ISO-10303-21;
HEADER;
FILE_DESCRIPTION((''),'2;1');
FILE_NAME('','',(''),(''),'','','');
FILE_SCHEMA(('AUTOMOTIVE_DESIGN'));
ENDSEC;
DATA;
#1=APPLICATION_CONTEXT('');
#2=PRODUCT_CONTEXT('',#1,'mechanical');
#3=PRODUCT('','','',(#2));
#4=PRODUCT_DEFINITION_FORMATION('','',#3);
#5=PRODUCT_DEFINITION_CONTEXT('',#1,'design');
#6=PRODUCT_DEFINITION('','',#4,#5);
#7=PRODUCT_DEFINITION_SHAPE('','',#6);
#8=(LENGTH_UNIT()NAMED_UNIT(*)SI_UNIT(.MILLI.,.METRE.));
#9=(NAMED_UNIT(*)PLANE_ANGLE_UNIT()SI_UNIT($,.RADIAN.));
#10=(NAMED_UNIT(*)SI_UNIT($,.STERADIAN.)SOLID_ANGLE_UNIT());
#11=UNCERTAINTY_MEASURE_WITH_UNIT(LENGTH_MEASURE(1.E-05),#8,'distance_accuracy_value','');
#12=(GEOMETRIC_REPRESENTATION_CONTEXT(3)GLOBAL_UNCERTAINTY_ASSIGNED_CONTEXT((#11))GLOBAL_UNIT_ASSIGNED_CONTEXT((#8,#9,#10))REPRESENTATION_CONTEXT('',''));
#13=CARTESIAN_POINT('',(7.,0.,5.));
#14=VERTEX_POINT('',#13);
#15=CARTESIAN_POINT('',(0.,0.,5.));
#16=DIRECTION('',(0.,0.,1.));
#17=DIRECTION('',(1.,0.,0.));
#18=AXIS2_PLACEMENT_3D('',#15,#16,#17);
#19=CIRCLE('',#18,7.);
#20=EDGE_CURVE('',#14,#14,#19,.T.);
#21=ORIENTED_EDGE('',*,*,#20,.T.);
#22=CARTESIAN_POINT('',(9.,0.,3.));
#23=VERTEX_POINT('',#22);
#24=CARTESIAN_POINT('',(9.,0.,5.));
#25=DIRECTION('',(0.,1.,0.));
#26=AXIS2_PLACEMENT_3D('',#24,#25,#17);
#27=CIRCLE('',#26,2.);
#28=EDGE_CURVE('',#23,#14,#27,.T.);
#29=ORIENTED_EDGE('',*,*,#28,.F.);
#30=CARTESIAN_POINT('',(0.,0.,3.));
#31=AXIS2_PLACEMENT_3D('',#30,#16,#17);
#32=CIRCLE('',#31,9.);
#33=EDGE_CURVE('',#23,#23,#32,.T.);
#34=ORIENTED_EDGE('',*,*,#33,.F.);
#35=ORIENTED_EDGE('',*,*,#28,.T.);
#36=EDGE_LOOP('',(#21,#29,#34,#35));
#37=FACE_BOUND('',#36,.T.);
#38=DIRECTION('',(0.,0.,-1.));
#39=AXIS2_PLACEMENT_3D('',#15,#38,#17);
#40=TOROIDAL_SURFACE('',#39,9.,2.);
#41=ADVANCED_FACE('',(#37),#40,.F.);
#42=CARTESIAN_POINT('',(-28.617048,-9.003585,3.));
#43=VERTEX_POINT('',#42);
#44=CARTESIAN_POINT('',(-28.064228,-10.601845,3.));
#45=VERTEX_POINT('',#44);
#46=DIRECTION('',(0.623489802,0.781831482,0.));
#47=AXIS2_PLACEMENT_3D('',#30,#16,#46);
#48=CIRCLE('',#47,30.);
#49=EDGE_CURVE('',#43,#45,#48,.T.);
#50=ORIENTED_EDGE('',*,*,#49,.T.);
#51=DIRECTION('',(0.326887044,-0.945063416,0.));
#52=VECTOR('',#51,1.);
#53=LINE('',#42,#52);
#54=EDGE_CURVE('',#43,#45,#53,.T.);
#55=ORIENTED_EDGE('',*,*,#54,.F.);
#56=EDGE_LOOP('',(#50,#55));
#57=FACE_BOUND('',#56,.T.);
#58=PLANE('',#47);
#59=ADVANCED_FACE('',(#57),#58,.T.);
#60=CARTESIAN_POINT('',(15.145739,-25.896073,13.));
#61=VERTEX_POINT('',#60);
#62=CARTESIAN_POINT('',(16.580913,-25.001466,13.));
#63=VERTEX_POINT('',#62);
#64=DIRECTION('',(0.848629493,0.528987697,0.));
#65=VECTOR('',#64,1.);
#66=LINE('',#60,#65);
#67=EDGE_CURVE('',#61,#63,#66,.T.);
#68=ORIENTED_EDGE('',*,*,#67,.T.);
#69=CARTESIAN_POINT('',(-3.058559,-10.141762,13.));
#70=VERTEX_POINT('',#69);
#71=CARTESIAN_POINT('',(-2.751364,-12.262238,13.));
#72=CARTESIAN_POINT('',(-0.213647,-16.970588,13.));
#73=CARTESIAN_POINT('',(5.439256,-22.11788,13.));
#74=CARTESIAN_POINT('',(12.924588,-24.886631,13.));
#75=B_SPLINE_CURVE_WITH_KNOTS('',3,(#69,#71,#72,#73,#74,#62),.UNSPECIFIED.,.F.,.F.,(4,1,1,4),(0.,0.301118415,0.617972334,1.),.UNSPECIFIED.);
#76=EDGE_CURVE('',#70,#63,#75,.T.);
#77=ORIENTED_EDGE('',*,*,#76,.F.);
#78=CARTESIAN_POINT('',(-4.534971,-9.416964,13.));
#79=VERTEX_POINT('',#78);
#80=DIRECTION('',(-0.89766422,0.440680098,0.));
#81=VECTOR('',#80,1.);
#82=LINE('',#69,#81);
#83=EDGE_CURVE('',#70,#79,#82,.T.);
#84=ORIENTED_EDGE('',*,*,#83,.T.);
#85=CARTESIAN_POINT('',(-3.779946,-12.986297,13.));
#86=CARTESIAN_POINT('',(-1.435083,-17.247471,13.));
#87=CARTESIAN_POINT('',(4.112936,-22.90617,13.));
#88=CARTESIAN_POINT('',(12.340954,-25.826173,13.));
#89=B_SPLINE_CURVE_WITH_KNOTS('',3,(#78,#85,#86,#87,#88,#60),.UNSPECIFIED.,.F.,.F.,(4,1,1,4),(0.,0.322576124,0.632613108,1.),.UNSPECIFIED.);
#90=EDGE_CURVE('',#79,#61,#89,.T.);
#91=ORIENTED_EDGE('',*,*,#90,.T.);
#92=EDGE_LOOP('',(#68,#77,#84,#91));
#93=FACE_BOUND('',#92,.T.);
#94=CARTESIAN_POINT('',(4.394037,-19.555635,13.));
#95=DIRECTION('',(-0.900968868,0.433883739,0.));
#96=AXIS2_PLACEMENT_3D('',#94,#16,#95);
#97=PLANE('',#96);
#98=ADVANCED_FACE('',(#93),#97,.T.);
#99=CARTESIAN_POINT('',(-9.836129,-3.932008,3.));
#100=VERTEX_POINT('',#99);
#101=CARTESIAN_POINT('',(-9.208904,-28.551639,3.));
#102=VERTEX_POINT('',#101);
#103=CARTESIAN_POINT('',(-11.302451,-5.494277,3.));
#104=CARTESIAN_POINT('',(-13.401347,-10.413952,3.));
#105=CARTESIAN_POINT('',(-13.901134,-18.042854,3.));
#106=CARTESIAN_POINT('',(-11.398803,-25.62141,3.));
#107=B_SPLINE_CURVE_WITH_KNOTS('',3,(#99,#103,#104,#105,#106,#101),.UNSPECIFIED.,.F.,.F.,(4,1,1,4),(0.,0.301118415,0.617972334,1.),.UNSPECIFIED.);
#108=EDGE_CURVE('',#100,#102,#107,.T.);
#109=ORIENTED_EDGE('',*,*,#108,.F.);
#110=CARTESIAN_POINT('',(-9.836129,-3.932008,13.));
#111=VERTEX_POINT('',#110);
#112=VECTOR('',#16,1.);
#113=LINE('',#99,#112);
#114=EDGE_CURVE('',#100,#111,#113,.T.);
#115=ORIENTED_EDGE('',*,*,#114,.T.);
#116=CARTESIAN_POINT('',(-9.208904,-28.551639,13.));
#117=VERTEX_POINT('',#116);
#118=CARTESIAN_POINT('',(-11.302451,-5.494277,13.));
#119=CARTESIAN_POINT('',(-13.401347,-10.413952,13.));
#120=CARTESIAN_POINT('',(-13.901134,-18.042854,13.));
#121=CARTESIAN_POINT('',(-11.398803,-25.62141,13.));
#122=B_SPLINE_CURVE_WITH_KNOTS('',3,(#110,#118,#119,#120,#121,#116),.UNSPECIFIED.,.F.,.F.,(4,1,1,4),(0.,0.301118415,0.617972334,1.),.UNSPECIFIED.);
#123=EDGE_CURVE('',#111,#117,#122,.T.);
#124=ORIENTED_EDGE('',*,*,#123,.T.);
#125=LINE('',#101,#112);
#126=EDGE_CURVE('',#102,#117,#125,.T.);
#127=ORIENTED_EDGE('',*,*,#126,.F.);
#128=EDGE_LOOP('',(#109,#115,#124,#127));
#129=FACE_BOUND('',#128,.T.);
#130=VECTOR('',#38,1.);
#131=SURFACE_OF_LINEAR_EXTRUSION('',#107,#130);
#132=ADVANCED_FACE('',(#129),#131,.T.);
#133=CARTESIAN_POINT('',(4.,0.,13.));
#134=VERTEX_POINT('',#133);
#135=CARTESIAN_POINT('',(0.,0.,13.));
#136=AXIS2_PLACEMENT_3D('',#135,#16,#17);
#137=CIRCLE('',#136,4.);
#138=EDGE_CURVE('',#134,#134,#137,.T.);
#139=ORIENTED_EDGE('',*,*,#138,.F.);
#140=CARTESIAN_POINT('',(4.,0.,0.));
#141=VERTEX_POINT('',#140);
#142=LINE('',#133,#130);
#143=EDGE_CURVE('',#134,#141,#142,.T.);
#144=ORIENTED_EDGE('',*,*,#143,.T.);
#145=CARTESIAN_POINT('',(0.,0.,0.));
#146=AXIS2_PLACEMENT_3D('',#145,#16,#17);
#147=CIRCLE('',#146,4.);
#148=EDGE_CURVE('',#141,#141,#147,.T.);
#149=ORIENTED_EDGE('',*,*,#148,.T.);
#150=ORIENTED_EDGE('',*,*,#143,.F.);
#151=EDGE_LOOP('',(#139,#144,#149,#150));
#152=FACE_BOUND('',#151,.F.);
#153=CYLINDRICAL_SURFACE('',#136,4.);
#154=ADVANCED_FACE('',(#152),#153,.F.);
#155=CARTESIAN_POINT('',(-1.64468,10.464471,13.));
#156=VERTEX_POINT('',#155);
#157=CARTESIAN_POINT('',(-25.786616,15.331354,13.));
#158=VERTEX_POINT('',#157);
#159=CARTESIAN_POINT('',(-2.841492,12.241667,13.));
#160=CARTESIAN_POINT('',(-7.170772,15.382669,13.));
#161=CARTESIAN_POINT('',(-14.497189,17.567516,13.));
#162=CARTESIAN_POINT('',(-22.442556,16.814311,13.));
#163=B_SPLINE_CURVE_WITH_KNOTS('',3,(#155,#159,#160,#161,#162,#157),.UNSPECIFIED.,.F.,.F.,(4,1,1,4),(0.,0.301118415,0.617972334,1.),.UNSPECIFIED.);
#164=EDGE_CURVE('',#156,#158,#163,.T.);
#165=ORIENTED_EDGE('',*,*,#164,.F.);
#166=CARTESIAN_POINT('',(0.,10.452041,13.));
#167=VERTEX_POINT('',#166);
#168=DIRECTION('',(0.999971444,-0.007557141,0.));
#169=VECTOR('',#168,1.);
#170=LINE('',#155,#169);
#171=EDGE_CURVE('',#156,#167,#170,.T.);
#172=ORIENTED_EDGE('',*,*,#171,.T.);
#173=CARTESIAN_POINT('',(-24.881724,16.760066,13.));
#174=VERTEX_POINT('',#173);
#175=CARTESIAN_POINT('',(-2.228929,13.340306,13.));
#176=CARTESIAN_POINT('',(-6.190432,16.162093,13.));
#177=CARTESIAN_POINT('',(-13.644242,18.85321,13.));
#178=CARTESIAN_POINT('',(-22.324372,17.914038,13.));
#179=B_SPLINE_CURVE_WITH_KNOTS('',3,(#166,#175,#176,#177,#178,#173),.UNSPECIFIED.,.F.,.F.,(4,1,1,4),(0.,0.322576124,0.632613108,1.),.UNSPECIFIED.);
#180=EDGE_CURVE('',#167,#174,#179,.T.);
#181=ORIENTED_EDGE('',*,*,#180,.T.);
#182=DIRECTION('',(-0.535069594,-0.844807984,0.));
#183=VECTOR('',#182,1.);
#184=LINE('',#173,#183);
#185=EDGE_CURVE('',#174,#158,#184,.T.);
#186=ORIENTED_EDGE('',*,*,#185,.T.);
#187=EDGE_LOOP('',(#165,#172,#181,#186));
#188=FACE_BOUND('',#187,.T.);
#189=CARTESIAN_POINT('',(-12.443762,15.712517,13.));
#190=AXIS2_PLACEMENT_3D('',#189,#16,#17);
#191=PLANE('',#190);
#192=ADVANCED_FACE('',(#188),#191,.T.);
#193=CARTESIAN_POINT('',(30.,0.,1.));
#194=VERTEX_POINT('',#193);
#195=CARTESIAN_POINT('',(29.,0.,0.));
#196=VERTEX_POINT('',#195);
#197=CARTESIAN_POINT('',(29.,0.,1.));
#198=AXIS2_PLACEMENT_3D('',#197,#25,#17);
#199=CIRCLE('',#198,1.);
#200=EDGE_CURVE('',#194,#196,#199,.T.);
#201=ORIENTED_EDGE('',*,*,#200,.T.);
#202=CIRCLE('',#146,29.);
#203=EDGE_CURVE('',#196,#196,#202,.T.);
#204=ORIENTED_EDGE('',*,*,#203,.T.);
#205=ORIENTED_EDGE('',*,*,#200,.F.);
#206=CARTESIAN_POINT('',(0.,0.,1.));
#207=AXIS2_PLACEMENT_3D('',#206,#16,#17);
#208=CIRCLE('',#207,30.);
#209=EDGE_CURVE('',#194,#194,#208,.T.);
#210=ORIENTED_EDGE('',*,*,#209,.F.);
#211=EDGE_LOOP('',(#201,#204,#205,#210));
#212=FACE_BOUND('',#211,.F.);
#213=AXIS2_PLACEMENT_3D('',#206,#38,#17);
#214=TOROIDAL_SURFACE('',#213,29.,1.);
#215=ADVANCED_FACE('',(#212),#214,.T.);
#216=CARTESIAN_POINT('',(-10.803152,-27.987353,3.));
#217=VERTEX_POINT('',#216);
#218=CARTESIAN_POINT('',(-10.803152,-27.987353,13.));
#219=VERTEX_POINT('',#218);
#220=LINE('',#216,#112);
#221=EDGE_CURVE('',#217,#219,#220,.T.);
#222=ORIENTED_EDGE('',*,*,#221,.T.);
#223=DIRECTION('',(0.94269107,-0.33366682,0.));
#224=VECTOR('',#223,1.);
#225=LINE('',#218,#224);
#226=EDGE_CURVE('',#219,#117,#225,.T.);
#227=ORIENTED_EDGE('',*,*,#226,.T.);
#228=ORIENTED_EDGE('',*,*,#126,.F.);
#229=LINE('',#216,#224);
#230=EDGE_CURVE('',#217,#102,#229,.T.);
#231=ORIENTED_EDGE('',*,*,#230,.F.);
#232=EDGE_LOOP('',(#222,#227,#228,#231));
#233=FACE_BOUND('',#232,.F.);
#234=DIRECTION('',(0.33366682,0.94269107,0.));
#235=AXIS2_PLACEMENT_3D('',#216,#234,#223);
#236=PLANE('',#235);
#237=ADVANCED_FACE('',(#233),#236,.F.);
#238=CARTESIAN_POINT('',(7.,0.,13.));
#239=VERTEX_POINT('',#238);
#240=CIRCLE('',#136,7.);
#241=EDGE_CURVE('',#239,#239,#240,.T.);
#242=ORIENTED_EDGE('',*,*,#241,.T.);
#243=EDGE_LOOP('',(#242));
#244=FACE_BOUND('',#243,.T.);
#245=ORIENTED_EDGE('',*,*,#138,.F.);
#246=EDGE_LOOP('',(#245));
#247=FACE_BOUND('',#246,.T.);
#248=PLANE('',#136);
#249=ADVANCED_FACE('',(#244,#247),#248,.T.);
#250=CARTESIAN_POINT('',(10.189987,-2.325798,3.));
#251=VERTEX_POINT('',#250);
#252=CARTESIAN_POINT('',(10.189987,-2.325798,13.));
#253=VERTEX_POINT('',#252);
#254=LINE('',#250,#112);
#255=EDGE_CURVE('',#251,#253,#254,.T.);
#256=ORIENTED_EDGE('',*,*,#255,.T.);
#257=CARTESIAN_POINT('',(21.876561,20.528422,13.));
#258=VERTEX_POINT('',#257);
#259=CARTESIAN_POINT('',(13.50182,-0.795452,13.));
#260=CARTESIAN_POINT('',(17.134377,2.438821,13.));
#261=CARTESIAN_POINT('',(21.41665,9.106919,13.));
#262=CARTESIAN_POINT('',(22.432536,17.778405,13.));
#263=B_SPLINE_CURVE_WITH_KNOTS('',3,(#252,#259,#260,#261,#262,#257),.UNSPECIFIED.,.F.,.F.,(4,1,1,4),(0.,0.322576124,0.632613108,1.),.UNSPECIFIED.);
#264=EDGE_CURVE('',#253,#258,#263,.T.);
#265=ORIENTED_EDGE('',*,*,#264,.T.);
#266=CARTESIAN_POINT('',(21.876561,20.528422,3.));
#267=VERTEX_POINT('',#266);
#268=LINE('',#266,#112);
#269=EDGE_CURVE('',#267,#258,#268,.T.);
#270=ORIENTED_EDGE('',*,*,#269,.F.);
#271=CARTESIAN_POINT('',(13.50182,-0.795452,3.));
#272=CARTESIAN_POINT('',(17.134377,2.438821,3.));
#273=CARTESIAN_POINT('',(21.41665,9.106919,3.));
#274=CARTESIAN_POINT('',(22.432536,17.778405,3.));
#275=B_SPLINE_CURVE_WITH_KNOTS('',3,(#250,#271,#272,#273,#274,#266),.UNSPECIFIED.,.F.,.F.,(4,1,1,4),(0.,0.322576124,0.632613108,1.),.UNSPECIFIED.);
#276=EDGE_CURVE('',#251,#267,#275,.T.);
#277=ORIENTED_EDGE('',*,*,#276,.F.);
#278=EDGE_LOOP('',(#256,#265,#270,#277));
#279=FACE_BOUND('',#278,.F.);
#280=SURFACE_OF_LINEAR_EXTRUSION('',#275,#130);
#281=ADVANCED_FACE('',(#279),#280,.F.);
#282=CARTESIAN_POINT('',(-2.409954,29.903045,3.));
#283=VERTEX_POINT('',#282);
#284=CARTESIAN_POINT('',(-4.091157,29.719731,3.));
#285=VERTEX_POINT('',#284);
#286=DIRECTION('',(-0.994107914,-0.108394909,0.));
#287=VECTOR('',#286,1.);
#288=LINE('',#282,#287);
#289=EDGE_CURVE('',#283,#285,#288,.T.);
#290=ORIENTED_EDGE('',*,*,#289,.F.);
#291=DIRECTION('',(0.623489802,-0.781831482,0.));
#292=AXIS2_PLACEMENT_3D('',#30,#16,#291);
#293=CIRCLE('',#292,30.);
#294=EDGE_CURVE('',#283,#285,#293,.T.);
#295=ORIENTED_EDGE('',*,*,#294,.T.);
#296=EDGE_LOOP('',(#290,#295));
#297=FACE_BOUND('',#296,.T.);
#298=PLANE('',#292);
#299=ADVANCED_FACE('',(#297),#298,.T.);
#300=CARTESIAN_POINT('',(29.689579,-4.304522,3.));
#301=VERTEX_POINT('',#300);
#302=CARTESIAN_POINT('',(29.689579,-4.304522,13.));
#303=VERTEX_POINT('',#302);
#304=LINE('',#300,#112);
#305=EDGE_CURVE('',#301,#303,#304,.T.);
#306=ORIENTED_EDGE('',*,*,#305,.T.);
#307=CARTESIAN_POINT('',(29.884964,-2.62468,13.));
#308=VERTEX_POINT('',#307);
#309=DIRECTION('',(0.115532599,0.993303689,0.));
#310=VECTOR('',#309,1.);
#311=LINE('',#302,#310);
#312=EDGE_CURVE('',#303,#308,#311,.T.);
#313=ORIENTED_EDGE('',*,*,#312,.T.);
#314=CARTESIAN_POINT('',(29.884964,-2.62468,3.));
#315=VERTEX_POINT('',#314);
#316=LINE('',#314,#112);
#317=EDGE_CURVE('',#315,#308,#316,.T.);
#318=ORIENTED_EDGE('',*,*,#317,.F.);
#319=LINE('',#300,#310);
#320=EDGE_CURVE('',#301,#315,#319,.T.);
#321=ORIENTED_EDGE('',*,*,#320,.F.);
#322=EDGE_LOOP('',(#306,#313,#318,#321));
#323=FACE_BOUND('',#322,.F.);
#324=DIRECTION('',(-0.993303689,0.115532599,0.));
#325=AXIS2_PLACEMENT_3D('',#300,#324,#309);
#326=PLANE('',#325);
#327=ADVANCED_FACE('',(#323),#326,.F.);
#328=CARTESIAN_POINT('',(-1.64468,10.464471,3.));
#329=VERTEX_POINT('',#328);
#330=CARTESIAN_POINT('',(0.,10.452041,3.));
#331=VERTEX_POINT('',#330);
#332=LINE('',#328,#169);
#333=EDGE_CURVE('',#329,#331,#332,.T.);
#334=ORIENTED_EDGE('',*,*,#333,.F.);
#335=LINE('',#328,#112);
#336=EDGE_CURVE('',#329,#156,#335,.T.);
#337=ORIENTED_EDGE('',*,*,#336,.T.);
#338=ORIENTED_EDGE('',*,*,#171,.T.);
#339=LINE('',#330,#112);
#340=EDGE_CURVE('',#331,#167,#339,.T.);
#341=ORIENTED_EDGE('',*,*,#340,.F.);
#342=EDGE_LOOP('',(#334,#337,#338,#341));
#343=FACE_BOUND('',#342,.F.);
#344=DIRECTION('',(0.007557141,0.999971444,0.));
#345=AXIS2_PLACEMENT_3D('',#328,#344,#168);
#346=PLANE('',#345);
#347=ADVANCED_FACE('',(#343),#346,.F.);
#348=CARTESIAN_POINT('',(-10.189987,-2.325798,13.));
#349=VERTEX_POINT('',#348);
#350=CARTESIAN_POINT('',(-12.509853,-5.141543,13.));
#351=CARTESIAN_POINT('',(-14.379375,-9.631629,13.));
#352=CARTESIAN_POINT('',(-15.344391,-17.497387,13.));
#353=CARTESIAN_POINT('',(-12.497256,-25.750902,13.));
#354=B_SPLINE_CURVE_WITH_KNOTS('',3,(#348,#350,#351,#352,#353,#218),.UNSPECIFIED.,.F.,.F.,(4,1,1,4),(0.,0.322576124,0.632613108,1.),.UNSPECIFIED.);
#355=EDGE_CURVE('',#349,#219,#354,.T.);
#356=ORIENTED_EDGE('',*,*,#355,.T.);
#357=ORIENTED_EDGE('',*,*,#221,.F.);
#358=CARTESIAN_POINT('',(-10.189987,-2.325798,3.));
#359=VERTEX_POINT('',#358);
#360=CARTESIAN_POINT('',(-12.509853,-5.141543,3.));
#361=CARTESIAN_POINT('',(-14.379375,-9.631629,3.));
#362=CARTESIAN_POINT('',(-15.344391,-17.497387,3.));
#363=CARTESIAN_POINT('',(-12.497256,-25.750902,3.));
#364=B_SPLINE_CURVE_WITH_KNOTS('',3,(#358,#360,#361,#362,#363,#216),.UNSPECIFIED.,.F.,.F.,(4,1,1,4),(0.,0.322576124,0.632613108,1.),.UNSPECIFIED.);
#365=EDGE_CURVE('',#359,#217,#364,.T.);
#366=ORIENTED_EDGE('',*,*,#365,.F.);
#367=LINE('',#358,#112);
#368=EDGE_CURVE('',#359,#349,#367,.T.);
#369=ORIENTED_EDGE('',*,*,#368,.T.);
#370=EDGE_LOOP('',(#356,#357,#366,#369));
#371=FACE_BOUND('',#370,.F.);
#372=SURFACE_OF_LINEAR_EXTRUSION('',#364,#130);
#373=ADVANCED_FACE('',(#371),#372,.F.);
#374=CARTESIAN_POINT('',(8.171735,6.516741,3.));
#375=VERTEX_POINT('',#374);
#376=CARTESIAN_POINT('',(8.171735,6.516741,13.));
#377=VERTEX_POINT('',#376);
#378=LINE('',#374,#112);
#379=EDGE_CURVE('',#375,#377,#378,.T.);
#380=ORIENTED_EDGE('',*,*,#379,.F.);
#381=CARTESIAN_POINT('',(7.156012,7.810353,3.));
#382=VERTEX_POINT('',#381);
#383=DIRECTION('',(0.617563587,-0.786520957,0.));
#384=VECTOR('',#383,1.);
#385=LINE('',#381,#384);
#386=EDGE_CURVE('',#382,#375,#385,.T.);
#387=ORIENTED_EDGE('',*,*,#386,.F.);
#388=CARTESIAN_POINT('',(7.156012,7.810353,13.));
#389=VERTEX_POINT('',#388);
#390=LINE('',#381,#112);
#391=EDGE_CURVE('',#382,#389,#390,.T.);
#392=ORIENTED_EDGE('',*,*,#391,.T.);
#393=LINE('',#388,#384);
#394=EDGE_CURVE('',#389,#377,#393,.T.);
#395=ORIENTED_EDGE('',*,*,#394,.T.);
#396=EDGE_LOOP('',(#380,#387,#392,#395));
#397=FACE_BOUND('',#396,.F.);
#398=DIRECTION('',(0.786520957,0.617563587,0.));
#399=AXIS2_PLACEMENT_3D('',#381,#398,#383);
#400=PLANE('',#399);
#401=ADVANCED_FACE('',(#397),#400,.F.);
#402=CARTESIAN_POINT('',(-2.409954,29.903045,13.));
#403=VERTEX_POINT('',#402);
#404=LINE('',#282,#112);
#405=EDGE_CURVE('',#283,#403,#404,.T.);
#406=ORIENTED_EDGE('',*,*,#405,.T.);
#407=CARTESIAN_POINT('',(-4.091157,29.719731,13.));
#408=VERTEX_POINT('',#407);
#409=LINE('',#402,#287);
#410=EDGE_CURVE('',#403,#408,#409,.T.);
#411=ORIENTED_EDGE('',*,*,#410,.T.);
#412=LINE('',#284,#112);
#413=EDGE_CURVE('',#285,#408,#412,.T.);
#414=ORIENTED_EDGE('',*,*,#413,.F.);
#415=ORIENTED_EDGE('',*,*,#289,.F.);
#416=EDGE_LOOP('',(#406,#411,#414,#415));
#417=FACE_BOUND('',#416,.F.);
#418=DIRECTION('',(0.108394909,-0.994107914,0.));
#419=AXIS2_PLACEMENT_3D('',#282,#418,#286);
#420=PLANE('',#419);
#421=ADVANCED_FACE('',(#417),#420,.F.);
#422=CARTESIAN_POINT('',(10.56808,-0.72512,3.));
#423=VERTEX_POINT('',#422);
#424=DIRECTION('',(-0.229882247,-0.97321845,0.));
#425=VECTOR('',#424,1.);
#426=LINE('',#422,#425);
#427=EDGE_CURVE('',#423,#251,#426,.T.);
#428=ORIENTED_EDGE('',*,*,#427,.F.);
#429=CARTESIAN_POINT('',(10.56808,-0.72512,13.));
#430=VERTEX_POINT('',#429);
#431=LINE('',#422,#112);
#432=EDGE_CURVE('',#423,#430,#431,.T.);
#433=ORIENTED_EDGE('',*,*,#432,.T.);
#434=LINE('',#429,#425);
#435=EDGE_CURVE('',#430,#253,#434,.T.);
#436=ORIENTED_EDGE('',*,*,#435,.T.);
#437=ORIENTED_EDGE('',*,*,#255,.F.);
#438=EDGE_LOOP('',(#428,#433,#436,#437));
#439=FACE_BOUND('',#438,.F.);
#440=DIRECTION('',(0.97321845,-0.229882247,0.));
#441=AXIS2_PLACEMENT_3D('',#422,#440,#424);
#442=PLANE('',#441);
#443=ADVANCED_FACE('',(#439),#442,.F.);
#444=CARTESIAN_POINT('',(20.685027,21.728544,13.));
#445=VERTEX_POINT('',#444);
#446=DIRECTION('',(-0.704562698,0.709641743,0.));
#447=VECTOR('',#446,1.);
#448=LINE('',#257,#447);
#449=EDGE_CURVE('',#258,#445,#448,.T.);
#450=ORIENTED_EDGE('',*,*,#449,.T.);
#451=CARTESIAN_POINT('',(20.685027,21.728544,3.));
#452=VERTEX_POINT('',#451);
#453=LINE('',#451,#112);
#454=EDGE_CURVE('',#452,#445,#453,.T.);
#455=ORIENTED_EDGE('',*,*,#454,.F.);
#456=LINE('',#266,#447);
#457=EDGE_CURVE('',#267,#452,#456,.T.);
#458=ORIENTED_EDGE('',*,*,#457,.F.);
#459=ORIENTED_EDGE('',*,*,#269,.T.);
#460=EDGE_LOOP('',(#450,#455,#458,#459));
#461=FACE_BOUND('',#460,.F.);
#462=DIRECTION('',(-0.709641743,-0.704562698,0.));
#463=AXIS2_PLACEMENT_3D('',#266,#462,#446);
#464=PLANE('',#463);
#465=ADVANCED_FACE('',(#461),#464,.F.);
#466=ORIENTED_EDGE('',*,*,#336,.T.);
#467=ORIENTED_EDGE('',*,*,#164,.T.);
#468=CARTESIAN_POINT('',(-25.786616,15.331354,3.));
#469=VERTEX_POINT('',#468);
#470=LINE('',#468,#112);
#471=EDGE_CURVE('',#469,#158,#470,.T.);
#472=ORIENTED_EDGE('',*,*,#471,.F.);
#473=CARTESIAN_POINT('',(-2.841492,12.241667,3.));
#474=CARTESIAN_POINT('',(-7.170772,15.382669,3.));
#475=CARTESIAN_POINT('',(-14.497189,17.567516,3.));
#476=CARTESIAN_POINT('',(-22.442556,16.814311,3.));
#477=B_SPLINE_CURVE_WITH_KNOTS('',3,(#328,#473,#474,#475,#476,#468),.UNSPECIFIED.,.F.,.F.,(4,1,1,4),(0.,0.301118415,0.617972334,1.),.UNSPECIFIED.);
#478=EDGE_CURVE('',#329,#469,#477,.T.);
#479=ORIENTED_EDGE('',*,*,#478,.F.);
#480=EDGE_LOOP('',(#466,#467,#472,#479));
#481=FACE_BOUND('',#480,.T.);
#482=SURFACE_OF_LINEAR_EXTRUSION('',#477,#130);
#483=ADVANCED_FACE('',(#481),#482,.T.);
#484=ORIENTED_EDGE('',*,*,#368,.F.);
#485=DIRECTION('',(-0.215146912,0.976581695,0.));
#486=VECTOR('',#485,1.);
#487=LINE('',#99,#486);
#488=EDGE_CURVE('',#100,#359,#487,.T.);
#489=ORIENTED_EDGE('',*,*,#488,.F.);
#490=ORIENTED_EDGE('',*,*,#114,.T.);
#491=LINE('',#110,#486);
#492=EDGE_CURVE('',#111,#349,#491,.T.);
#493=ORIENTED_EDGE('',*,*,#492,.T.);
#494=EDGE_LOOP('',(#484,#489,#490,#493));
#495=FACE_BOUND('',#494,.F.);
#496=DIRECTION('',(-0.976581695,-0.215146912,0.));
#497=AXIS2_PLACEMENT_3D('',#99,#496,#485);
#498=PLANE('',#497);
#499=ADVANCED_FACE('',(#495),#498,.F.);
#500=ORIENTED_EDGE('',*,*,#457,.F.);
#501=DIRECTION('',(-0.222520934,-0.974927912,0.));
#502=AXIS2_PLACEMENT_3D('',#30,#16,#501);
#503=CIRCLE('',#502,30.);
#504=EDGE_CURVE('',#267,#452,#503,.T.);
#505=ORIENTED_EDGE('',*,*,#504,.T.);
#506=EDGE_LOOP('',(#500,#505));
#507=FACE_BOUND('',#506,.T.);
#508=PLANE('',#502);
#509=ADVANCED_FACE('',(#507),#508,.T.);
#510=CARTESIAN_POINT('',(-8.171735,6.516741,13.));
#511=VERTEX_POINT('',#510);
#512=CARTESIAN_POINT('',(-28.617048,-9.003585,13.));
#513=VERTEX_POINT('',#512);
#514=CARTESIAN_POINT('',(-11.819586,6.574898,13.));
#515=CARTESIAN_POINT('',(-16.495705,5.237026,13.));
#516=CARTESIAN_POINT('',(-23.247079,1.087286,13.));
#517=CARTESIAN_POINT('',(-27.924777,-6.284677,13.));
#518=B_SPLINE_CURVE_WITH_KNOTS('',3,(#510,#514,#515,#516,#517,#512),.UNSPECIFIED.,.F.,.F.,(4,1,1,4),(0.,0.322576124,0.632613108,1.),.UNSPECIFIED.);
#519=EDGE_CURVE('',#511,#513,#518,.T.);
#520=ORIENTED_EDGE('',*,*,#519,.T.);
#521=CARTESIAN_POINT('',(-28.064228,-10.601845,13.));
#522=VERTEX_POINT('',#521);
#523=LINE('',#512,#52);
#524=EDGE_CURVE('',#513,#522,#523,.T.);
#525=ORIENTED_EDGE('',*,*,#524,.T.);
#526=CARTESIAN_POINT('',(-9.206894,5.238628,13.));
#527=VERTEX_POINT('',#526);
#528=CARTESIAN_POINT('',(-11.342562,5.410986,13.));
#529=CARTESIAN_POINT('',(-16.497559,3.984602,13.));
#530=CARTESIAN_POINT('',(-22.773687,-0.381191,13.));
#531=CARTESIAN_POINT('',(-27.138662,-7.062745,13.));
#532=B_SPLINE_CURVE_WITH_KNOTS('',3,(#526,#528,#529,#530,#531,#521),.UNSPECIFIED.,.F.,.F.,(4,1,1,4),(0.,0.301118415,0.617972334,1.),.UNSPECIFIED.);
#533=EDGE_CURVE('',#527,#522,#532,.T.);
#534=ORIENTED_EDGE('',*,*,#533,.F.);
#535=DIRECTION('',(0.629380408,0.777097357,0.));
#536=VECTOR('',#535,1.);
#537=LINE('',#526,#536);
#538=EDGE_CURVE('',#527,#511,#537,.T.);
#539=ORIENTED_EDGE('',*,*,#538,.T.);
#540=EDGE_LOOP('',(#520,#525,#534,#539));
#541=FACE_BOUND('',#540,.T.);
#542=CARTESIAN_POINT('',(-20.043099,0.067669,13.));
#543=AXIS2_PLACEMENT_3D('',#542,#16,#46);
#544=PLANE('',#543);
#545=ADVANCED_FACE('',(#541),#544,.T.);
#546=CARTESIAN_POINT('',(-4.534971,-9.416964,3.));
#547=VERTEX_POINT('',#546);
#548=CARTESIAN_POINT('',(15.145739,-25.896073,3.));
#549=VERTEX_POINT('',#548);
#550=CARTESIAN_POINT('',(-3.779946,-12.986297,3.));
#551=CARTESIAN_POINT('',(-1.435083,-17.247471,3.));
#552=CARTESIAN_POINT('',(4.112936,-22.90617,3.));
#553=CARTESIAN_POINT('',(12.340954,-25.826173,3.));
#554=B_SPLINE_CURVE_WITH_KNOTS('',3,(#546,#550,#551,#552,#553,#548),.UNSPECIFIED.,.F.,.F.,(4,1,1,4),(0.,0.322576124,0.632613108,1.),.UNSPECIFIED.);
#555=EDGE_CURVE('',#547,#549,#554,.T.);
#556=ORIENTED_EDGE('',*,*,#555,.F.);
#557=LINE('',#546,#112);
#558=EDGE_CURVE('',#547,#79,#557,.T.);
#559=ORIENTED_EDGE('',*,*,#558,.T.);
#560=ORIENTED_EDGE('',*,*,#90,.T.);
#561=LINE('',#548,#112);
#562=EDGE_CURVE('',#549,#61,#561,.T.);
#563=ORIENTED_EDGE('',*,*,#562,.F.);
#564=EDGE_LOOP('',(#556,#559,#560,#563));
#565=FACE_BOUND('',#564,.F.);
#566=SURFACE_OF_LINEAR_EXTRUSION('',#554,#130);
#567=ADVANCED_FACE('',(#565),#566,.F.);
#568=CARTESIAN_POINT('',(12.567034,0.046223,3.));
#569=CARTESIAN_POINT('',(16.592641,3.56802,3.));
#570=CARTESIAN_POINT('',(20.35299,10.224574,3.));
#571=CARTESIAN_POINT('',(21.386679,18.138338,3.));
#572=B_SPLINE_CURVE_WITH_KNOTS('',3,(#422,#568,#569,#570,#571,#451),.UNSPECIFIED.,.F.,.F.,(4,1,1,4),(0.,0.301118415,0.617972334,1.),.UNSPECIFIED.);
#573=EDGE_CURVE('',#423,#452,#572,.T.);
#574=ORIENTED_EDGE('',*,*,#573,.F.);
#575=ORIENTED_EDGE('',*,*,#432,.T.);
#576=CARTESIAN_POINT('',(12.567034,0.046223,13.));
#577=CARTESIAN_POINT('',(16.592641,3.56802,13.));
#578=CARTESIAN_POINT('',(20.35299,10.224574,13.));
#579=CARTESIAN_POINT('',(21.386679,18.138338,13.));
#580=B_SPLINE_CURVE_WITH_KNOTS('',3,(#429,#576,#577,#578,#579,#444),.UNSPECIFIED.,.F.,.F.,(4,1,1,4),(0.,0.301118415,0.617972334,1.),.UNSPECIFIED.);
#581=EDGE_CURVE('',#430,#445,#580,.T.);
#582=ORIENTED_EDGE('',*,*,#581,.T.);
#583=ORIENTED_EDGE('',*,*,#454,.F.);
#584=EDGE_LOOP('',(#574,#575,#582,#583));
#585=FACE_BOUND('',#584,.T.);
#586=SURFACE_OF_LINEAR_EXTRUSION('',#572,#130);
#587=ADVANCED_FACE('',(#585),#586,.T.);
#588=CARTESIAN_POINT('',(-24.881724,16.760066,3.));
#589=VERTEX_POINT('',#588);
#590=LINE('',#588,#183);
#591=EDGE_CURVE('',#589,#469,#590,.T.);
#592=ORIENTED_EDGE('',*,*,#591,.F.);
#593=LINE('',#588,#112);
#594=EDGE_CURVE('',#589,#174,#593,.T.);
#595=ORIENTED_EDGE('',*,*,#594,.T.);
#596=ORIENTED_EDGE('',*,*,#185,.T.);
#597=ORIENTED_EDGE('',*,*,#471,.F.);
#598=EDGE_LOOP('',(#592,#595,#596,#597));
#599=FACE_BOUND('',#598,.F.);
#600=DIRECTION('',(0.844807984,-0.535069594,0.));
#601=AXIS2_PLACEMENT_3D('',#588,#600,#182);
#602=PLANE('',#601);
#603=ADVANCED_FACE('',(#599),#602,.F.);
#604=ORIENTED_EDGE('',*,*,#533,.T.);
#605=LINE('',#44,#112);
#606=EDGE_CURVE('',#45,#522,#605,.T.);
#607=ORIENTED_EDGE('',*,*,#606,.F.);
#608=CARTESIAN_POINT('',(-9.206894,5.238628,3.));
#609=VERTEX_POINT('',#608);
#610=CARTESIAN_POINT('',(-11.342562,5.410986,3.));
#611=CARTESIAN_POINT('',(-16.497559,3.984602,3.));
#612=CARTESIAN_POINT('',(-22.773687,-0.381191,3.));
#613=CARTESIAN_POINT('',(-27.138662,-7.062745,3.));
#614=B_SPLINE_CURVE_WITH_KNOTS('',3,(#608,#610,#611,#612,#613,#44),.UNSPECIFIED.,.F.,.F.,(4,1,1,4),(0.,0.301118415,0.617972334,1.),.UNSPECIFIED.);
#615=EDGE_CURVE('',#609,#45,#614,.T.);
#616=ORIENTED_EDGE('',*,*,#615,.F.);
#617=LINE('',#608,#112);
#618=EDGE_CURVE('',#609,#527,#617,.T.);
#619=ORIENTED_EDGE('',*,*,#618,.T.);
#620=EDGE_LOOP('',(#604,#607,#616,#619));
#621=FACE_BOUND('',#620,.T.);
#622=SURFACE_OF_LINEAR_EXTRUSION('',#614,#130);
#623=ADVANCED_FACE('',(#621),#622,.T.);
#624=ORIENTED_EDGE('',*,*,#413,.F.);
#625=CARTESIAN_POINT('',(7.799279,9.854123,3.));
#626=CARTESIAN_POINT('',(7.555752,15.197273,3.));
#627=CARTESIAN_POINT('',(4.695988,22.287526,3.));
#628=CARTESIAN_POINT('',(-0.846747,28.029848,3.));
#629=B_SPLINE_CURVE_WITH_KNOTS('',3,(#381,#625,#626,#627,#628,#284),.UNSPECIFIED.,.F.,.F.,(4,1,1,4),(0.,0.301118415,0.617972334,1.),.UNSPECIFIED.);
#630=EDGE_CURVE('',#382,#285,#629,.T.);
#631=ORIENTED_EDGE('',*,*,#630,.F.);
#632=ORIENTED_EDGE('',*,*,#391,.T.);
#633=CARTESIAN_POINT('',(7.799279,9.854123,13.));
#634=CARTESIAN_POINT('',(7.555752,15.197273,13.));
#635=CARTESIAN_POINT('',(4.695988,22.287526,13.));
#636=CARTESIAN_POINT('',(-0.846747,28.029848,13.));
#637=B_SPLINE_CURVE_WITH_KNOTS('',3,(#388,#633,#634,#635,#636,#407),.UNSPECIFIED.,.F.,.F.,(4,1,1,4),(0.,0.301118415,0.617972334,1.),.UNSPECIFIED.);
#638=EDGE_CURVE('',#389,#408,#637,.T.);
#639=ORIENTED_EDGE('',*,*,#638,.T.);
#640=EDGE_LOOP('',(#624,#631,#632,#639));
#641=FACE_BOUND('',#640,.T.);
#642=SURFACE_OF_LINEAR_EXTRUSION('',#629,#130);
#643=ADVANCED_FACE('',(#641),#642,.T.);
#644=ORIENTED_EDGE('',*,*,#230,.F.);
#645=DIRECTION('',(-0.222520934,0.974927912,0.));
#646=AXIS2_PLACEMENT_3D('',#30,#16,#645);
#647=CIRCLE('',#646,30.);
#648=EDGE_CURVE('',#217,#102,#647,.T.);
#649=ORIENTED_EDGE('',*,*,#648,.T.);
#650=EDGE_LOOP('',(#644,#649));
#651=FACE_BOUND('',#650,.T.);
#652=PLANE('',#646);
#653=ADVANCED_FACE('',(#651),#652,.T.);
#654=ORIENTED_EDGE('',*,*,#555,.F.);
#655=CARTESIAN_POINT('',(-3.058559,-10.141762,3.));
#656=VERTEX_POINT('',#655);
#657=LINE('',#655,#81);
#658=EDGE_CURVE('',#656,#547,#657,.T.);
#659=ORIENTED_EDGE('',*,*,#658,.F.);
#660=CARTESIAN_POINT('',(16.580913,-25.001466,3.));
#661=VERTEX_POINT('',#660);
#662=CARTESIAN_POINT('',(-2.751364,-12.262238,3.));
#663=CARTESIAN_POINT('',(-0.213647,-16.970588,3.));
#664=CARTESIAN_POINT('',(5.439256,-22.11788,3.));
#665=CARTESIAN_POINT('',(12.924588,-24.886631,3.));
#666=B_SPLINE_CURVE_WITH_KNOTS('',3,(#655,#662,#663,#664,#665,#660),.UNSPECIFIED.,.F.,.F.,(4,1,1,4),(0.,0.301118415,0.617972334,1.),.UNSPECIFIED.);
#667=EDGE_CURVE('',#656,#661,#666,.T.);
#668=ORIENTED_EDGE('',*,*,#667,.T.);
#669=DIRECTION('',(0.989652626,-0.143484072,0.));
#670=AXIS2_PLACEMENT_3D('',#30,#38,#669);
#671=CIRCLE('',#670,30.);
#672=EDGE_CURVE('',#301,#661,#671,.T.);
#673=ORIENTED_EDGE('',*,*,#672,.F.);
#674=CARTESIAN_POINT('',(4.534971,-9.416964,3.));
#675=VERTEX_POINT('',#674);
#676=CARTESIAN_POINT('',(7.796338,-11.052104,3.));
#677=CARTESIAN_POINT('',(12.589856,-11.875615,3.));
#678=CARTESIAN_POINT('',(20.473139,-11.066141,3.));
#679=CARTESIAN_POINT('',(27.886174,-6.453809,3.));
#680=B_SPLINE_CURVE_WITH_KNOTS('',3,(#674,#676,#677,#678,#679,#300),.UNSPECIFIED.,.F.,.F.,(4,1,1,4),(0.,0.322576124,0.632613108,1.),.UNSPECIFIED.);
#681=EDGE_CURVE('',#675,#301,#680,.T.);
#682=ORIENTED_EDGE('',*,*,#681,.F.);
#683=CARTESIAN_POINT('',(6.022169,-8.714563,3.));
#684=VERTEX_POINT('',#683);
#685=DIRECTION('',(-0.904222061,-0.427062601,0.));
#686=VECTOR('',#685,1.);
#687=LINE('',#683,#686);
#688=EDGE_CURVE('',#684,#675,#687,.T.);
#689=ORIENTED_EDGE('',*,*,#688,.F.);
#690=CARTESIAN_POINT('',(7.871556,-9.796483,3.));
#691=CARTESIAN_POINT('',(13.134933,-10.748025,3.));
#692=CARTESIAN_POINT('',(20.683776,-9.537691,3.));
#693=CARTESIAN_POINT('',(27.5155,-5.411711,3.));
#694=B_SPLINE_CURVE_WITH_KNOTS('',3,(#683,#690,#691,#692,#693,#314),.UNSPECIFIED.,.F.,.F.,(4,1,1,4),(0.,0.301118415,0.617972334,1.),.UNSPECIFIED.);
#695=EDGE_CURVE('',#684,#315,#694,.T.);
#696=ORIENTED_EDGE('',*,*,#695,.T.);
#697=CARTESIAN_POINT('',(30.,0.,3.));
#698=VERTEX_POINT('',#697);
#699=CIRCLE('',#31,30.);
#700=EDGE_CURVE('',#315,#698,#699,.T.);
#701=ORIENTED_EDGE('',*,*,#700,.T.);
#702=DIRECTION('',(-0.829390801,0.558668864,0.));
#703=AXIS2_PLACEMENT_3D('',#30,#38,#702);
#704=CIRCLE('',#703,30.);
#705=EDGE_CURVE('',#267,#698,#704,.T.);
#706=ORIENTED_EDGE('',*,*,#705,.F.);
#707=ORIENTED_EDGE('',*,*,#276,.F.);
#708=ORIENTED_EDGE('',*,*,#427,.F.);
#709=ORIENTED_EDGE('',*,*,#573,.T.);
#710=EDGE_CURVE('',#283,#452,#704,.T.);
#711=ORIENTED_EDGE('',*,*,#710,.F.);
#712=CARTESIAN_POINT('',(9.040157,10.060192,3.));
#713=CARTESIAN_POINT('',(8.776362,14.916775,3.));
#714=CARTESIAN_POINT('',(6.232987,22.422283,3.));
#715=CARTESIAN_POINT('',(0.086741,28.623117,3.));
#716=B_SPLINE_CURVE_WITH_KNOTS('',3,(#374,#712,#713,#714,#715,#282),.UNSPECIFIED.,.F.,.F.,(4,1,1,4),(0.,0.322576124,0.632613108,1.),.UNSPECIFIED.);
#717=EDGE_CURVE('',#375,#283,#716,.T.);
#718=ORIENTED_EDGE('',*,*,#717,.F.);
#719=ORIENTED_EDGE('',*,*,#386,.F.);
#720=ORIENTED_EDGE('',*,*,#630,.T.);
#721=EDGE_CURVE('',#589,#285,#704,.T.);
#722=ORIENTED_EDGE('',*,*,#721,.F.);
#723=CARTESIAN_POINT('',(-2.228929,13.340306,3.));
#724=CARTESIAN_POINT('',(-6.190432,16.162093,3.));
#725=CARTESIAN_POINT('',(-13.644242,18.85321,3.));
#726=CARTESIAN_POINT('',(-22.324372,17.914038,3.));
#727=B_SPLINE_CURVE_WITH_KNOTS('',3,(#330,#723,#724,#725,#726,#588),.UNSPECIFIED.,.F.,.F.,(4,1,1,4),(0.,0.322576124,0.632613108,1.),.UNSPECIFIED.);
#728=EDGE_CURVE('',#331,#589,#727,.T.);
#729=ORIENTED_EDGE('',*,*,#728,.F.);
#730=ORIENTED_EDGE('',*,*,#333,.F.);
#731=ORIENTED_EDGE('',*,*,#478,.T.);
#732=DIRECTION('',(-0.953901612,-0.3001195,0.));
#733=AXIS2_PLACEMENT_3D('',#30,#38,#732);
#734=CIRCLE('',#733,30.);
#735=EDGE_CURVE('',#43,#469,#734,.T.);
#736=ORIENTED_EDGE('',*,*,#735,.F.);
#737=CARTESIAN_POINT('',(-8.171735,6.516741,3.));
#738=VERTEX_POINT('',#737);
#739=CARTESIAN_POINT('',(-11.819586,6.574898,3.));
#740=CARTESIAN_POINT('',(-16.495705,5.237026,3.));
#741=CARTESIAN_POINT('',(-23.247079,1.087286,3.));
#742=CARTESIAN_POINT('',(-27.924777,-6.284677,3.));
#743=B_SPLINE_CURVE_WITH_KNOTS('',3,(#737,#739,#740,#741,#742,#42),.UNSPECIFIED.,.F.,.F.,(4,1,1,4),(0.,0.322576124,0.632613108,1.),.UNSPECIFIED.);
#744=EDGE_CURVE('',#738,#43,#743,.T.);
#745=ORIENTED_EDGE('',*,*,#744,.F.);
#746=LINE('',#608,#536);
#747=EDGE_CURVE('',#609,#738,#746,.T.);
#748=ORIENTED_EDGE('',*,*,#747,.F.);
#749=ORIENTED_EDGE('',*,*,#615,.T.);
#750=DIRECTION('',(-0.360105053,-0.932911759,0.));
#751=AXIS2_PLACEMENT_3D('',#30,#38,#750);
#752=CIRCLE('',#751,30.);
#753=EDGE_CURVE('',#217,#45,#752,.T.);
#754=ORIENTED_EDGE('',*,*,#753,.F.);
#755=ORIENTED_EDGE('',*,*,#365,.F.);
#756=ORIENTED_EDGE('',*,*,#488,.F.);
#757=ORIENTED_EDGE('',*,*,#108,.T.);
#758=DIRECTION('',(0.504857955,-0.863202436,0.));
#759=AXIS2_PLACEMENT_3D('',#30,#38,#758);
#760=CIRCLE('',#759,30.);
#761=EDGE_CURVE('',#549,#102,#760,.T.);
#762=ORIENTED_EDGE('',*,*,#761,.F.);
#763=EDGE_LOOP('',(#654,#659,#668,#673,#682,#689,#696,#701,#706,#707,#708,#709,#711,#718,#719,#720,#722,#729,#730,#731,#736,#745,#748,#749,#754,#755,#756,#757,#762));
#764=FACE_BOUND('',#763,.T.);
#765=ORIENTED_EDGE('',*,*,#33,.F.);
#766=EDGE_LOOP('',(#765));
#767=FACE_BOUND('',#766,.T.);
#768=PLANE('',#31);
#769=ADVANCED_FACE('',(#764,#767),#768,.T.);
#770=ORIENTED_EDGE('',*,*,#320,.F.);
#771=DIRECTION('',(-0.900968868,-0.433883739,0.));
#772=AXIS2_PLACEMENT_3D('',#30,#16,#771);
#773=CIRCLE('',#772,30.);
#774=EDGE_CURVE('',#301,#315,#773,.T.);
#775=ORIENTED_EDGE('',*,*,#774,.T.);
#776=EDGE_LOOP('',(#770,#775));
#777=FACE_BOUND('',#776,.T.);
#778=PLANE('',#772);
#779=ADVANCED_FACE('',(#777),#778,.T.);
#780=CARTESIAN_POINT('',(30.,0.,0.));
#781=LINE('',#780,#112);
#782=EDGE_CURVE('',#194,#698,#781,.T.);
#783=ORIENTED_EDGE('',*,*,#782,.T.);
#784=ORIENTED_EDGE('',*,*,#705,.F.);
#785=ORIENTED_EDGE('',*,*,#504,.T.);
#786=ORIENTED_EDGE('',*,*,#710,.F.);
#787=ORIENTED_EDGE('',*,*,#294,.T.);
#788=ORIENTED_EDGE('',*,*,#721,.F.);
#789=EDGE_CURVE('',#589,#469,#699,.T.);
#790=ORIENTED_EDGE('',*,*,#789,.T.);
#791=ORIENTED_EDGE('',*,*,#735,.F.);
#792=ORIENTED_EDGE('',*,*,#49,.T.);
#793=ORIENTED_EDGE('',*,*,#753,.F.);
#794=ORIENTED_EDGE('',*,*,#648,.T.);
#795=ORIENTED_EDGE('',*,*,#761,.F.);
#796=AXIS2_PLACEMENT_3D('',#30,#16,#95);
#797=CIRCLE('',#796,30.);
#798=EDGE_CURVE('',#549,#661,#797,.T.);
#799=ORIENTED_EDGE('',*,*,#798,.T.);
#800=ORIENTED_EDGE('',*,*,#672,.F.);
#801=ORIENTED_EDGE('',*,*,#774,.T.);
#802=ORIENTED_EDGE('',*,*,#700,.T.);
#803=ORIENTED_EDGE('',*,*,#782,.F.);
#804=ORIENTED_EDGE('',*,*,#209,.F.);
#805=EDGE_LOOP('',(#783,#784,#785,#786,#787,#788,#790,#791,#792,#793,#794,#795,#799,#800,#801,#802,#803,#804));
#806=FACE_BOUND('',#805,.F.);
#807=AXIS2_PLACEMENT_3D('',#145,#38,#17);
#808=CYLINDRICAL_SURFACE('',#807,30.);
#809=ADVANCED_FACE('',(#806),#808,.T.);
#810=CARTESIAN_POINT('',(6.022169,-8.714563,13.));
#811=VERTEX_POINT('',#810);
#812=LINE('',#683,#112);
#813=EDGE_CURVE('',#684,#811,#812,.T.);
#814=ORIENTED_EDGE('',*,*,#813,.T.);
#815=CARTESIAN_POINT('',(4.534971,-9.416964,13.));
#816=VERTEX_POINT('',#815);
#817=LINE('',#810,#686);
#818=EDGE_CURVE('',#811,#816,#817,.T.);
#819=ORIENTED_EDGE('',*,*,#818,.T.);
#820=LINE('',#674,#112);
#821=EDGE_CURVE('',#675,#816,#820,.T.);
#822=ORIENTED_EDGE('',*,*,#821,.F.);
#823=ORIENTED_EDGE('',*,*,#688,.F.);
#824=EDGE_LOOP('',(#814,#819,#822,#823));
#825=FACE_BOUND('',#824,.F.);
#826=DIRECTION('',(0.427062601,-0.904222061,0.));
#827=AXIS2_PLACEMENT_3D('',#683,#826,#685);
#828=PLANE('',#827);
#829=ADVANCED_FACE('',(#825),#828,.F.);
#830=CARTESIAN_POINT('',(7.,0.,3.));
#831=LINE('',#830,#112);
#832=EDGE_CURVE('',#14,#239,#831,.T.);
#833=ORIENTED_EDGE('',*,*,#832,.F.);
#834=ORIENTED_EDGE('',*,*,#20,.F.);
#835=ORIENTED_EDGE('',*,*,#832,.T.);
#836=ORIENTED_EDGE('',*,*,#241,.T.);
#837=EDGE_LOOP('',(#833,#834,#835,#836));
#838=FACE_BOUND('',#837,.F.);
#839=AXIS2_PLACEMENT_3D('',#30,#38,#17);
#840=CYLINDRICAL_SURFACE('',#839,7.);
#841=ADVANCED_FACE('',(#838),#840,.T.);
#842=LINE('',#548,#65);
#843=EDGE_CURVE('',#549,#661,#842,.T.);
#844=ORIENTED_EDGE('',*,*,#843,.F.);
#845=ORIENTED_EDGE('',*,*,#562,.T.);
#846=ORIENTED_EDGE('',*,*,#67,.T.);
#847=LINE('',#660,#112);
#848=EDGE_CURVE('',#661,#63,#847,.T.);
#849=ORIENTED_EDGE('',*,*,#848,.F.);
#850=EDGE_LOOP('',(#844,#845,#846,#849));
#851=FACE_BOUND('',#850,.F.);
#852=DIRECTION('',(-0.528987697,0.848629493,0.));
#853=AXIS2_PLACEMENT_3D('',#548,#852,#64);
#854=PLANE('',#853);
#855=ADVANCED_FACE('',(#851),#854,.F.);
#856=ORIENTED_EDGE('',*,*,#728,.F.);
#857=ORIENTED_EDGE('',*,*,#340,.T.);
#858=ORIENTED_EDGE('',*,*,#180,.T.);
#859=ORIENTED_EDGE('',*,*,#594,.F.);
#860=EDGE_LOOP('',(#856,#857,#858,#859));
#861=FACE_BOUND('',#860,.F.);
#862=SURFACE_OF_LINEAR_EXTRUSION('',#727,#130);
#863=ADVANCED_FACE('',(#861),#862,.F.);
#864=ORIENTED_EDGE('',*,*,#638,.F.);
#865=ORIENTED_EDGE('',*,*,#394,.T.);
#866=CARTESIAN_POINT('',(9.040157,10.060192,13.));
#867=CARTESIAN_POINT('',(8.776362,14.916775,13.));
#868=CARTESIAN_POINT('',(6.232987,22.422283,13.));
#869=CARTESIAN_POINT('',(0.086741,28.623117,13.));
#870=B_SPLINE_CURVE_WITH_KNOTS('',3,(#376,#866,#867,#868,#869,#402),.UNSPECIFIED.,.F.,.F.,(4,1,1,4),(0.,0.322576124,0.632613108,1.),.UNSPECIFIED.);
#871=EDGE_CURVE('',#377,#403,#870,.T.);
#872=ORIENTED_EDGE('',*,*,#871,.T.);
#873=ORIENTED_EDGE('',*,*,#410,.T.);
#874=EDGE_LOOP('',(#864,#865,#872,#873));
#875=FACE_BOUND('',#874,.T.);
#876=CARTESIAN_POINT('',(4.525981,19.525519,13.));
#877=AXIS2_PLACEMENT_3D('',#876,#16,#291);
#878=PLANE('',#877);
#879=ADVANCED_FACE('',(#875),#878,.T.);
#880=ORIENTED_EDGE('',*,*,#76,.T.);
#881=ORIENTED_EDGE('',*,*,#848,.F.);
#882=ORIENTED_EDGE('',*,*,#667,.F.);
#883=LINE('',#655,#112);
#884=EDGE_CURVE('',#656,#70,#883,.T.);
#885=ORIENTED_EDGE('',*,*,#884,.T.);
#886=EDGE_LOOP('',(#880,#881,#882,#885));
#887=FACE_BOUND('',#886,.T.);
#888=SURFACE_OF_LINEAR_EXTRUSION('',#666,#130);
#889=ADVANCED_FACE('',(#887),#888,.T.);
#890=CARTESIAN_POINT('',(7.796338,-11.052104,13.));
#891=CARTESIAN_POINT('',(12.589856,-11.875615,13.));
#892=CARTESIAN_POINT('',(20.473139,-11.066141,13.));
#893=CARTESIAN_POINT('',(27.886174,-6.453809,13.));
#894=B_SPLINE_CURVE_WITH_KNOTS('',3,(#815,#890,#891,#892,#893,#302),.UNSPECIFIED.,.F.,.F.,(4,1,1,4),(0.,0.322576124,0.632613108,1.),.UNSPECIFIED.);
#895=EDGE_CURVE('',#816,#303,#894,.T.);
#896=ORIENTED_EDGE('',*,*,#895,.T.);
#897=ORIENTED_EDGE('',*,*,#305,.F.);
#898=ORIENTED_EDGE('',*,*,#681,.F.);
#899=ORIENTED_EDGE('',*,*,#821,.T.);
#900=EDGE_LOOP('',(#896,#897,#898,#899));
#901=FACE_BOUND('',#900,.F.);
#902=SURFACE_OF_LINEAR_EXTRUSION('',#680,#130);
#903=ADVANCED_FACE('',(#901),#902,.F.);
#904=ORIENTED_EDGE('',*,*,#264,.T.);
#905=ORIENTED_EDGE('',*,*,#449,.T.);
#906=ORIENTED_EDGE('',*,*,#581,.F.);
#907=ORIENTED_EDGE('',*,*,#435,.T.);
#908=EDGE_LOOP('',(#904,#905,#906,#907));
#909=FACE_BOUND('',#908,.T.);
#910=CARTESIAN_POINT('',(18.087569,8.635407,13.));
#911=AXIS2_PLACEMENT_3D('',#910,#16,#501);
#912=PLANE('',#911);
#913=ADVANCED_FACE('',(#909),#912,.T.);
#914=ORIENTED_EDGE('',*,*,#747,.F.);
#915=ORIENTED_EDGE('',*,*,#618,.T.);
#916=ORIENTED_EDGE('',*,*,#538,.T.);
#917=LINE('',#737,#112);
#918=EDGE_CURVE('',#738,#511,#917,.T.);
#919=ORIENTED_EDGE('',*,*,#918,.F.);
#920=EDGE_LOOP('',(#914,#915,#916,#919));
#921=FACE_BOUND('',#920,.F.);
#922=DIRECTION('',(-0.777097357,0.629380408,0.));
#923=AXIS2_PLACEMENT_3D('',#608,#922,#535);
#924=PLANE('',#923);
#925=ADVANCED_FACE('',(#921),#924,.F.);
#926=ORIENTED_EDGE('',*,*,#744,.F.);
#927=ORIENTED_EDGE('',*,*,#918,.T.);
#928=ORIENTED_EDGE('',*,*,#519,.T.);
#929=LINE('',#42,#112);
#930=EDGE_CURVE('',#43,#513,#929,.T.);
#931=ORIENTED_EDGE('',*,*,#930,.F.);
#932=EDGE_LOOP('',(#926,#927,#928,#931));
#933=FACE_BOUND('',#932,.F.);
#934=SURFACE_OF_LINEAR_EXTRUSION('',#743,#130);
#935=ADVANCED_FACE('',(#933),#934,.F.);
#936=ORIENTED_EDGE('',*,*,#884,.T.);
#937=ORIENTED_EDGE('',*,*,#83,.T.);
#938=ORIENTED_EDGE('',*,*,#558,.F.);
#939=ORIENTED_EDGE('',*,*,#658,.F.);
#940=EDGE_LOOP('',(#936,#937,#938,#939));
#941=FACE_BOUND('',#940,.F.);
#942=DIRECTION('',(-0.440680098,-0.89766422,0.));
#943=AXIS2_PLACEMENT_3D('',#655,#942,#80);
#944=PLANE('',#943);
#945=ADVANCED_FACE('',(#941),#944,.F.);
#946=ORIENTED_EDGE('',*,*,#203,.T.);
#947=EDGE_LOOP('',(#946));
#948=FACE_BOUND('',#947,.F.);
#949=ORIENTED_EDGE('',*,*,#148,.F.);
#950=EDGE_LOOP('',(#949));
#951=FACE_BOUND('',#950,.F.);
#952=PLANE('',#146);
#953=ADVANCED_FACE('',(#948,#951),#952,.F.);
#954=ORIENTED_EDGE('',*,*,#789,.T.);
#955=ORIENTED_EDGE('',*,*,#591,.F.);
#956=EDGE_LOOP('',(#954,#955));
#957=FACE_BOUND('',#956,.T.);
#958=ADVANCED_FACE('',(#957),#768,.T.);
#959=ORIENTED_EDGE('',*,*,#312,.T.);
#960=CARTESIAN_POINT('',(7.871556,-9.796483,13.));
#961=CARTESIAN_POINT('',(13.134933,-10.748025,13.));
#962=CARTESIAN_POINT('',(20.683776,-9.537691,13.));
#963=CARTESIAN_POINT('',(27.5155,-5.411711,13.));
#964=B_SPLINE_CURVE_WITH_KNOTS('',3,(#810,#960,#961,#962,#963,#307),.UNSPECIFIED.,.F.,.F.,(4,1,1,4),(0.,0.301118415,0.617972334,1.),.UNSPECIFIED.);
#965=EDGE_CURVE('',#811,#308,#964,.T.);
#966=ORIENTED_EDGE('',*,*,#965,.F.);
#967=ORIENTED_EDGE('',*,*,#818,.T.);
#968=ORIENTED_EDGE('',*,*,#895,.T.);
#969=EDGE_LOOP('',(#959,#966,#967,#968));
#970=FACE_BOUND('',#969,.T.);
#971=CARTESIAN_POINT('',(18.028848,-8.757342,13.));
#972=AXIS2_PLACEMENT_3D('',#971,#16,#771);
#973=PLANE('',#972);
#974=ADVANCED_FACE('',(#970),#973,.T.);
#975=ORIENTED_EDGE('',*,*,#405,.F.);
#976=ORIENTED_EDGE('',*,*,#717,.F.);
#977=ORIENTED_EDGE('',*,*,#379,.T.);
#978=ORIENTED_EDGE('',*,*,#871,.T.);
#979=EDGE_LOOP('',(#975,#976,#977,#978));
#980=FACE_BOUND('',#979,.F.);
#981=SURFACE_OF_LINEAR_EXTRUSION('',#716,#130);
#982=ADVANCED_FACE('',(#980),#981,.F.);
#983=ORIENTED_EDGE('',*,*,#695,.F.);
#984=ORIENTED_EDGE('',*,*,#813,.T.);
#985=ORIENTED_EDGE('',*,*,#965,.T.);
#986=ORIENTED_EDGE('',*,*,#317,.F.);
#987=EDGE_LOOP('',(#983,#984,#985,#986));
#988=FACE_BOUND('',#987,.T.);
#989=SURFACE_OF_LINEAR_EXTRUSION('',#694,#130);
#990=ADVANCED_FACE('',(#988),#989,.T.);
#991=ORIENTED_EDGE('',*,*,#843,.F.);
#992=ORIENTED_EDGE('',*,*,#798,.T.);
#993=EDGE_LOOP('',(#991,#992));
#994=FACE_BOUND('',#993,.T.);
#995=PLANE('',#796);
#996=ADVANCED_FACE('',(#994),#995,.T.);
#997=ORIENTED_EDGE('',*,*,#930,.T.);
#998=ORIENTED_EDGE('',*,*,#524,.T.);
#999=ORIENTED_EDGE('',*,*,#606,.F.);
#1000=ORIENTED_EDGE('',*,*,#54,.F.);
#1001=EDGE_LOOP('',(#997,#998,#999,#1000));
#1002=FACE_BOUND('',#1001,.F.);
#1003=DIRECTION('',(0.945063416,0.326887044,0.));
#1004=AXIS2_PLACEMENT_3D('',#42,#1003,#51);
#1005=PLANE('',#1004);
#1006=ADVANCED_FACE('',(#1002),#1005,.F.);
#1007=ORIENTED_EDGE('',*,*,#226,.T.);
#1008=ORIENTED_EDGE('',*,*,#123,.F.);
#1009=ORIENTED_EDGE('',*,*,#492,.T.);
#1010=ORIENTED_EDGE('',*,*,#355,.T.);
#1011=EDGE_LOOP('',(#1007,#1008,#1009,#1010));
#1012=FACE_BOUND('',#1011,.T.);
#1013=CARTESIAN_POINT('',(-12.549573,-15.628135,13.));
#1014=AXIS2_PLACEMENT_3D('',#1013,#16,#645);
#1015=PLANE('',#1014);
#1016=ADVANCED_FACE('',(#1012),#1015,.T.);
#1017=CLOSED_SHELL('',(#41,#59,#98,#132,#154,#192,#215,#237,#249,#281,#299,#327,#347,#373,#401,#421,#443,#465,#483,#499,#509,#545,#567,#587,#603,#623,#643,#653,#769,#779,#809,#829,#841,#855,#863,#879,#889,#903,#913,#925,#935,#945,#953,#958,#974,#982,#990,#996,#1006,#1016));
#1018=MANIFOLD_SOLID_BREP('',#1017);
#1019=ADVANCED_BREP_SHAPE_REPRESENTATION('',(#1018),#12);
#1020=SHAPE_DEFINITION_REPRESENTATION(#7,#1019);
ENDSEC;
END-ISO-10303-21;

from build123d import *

# Parameters (mm, degrees)
F0_R     = 30
F1_DEPTH = 3
F3_DEPTH = 10
F5_COUNT = 7
F6_R     = 7
F7_DEPTH = 10
F8_R     = 4
F9_DEPTH = 13.001
F10_R    = 1
F11_R    = 2


with BuildPart() as f1:
    # F0 (on Top) → F1 (new body)
    with BuildSketch(Plane.XY):
        Circle(F0_R)
    extrude(amount=F1_DEPTH)

    # F2 (on face) → F3 (join)
    with BuildSketch(Plane.XY.offset(3)):
        with BuildLine():
            Line((-1.6446796944, 10.4644708335), (0, 10.4520414025))
            add(Edge.make_bspline(
                [(0, 10.4520414025), (-2.2289291518, 13.3403059975), (-6.1904321331, 16.1620932905), (-13.6442423507, 18.8532101818), (-22.3243720829, 17.9140381515), (-24.8817240251, 16.7600659168)],
                knots=[0, 0, 0, 0, 0.3225761243, 0.6326131084, 1, 1, 1, 1], degree=3))
            Line((-24.8817240251, 16.7600659168), (-25.7866161055, 15.3313544682))
            add(Edge.make_bspline(
                [(-1.6446796944, 10.4644708335), (-2.8414923982, 12.2416667658), (-7.1707724103, 15.3826694675), (-14.4971888519, 17.5675164501), (-22.4425556004, 16.8143108506), (-25.7866161055, 15.3313544682)],
                knots=[0, 0, 0, 0, 0.3011184154, 0.6179723344, 1, 1, 1, 1], degree=3))
        make_face()
    extrude(amount=F3_DEPTH)


with BuildPart() as f5_1:
    # F5: instance of F1
    add(f1.part.rotate(Axis((0, 0, 22.8564720601), (0, 0, 1)), 1 * 360 / F5_COUNT))


with BuildPart() as f5_2:
    # F5: instance of F1
    add(f1.part.rotate(Axis((0, 0, 22.8564720601), (0, 0, 1)), 2 * 360 / F5_COUNT))


with BuildPart() as f5_3:
    # F5: instance of F1
    add(f1.part.rotate(Axis((0, 0, 22.8564720601), (0, 0, 1)), 3 * 360 / F5_COUNT))


with BuildPart() as f5_4:
    # F5: instance of F1
    add(f1.part.rotate(Axis((0, 0, 22.8564720601), (0, 0, 1)), 4 * 360 / F5_COUNT))


with BuildPart() as f5_5:
    # F5: instance of F1
    add(f1.part.rotate(Axis((0, 0, 22.8564720601), (0, 0, 1)), 5 * 360 / F5_COUNT))


with BuildPart() as f5_6:
    # F5: instance of F1
    add(f1.part.rotate(Axis((0, 0, 22.8564720601), (0, 0, 1)), 6 * 360 / F5_COUNT))


with BuildPart() as f1_1:
    add(f1.part)

    add(f5_1.part)  # F7 merges F5_1

    add(f5_2.part)  # F7 merges F5_2

    add(f5_3.part)  # F7 merges F5_3

    add(f5_4.part)  # F7 merges F5_4

    add(f5_5.part)  # F7 merges F5_5

    add(f5_6.part)  # F7 merges F5_6
    # F6 (on face) → F7 (join)
    with BuildSketch(Plane.XY.offset(3)):
        Circle(F6_R)
    extrude(amount=F7_DEPTH)

    # F8 (on face) → F9 (cut, through all)
    with BuildSketch(Plane.XY.offset(13)):
        Circle(F8_R)
    extrude(amount=-F9_DEPTH, mode=Mode.SUBTRACT)

    # F10
    f10_edges = [f1_1.edges().sort_by_distance(p)[0] for p in [
        (-18.704694, 23.454944, 0),
    ]]
    fillet(f10_edges, radius=F10_R)

    # F11
    f11_edges = [f1_1.edges().sort_by_distance(p)[0] for p in [
        (-7, 0, 3),
    ]]
    fillet(f11_edges, radius=F11_R)


solid = f1_1.part
